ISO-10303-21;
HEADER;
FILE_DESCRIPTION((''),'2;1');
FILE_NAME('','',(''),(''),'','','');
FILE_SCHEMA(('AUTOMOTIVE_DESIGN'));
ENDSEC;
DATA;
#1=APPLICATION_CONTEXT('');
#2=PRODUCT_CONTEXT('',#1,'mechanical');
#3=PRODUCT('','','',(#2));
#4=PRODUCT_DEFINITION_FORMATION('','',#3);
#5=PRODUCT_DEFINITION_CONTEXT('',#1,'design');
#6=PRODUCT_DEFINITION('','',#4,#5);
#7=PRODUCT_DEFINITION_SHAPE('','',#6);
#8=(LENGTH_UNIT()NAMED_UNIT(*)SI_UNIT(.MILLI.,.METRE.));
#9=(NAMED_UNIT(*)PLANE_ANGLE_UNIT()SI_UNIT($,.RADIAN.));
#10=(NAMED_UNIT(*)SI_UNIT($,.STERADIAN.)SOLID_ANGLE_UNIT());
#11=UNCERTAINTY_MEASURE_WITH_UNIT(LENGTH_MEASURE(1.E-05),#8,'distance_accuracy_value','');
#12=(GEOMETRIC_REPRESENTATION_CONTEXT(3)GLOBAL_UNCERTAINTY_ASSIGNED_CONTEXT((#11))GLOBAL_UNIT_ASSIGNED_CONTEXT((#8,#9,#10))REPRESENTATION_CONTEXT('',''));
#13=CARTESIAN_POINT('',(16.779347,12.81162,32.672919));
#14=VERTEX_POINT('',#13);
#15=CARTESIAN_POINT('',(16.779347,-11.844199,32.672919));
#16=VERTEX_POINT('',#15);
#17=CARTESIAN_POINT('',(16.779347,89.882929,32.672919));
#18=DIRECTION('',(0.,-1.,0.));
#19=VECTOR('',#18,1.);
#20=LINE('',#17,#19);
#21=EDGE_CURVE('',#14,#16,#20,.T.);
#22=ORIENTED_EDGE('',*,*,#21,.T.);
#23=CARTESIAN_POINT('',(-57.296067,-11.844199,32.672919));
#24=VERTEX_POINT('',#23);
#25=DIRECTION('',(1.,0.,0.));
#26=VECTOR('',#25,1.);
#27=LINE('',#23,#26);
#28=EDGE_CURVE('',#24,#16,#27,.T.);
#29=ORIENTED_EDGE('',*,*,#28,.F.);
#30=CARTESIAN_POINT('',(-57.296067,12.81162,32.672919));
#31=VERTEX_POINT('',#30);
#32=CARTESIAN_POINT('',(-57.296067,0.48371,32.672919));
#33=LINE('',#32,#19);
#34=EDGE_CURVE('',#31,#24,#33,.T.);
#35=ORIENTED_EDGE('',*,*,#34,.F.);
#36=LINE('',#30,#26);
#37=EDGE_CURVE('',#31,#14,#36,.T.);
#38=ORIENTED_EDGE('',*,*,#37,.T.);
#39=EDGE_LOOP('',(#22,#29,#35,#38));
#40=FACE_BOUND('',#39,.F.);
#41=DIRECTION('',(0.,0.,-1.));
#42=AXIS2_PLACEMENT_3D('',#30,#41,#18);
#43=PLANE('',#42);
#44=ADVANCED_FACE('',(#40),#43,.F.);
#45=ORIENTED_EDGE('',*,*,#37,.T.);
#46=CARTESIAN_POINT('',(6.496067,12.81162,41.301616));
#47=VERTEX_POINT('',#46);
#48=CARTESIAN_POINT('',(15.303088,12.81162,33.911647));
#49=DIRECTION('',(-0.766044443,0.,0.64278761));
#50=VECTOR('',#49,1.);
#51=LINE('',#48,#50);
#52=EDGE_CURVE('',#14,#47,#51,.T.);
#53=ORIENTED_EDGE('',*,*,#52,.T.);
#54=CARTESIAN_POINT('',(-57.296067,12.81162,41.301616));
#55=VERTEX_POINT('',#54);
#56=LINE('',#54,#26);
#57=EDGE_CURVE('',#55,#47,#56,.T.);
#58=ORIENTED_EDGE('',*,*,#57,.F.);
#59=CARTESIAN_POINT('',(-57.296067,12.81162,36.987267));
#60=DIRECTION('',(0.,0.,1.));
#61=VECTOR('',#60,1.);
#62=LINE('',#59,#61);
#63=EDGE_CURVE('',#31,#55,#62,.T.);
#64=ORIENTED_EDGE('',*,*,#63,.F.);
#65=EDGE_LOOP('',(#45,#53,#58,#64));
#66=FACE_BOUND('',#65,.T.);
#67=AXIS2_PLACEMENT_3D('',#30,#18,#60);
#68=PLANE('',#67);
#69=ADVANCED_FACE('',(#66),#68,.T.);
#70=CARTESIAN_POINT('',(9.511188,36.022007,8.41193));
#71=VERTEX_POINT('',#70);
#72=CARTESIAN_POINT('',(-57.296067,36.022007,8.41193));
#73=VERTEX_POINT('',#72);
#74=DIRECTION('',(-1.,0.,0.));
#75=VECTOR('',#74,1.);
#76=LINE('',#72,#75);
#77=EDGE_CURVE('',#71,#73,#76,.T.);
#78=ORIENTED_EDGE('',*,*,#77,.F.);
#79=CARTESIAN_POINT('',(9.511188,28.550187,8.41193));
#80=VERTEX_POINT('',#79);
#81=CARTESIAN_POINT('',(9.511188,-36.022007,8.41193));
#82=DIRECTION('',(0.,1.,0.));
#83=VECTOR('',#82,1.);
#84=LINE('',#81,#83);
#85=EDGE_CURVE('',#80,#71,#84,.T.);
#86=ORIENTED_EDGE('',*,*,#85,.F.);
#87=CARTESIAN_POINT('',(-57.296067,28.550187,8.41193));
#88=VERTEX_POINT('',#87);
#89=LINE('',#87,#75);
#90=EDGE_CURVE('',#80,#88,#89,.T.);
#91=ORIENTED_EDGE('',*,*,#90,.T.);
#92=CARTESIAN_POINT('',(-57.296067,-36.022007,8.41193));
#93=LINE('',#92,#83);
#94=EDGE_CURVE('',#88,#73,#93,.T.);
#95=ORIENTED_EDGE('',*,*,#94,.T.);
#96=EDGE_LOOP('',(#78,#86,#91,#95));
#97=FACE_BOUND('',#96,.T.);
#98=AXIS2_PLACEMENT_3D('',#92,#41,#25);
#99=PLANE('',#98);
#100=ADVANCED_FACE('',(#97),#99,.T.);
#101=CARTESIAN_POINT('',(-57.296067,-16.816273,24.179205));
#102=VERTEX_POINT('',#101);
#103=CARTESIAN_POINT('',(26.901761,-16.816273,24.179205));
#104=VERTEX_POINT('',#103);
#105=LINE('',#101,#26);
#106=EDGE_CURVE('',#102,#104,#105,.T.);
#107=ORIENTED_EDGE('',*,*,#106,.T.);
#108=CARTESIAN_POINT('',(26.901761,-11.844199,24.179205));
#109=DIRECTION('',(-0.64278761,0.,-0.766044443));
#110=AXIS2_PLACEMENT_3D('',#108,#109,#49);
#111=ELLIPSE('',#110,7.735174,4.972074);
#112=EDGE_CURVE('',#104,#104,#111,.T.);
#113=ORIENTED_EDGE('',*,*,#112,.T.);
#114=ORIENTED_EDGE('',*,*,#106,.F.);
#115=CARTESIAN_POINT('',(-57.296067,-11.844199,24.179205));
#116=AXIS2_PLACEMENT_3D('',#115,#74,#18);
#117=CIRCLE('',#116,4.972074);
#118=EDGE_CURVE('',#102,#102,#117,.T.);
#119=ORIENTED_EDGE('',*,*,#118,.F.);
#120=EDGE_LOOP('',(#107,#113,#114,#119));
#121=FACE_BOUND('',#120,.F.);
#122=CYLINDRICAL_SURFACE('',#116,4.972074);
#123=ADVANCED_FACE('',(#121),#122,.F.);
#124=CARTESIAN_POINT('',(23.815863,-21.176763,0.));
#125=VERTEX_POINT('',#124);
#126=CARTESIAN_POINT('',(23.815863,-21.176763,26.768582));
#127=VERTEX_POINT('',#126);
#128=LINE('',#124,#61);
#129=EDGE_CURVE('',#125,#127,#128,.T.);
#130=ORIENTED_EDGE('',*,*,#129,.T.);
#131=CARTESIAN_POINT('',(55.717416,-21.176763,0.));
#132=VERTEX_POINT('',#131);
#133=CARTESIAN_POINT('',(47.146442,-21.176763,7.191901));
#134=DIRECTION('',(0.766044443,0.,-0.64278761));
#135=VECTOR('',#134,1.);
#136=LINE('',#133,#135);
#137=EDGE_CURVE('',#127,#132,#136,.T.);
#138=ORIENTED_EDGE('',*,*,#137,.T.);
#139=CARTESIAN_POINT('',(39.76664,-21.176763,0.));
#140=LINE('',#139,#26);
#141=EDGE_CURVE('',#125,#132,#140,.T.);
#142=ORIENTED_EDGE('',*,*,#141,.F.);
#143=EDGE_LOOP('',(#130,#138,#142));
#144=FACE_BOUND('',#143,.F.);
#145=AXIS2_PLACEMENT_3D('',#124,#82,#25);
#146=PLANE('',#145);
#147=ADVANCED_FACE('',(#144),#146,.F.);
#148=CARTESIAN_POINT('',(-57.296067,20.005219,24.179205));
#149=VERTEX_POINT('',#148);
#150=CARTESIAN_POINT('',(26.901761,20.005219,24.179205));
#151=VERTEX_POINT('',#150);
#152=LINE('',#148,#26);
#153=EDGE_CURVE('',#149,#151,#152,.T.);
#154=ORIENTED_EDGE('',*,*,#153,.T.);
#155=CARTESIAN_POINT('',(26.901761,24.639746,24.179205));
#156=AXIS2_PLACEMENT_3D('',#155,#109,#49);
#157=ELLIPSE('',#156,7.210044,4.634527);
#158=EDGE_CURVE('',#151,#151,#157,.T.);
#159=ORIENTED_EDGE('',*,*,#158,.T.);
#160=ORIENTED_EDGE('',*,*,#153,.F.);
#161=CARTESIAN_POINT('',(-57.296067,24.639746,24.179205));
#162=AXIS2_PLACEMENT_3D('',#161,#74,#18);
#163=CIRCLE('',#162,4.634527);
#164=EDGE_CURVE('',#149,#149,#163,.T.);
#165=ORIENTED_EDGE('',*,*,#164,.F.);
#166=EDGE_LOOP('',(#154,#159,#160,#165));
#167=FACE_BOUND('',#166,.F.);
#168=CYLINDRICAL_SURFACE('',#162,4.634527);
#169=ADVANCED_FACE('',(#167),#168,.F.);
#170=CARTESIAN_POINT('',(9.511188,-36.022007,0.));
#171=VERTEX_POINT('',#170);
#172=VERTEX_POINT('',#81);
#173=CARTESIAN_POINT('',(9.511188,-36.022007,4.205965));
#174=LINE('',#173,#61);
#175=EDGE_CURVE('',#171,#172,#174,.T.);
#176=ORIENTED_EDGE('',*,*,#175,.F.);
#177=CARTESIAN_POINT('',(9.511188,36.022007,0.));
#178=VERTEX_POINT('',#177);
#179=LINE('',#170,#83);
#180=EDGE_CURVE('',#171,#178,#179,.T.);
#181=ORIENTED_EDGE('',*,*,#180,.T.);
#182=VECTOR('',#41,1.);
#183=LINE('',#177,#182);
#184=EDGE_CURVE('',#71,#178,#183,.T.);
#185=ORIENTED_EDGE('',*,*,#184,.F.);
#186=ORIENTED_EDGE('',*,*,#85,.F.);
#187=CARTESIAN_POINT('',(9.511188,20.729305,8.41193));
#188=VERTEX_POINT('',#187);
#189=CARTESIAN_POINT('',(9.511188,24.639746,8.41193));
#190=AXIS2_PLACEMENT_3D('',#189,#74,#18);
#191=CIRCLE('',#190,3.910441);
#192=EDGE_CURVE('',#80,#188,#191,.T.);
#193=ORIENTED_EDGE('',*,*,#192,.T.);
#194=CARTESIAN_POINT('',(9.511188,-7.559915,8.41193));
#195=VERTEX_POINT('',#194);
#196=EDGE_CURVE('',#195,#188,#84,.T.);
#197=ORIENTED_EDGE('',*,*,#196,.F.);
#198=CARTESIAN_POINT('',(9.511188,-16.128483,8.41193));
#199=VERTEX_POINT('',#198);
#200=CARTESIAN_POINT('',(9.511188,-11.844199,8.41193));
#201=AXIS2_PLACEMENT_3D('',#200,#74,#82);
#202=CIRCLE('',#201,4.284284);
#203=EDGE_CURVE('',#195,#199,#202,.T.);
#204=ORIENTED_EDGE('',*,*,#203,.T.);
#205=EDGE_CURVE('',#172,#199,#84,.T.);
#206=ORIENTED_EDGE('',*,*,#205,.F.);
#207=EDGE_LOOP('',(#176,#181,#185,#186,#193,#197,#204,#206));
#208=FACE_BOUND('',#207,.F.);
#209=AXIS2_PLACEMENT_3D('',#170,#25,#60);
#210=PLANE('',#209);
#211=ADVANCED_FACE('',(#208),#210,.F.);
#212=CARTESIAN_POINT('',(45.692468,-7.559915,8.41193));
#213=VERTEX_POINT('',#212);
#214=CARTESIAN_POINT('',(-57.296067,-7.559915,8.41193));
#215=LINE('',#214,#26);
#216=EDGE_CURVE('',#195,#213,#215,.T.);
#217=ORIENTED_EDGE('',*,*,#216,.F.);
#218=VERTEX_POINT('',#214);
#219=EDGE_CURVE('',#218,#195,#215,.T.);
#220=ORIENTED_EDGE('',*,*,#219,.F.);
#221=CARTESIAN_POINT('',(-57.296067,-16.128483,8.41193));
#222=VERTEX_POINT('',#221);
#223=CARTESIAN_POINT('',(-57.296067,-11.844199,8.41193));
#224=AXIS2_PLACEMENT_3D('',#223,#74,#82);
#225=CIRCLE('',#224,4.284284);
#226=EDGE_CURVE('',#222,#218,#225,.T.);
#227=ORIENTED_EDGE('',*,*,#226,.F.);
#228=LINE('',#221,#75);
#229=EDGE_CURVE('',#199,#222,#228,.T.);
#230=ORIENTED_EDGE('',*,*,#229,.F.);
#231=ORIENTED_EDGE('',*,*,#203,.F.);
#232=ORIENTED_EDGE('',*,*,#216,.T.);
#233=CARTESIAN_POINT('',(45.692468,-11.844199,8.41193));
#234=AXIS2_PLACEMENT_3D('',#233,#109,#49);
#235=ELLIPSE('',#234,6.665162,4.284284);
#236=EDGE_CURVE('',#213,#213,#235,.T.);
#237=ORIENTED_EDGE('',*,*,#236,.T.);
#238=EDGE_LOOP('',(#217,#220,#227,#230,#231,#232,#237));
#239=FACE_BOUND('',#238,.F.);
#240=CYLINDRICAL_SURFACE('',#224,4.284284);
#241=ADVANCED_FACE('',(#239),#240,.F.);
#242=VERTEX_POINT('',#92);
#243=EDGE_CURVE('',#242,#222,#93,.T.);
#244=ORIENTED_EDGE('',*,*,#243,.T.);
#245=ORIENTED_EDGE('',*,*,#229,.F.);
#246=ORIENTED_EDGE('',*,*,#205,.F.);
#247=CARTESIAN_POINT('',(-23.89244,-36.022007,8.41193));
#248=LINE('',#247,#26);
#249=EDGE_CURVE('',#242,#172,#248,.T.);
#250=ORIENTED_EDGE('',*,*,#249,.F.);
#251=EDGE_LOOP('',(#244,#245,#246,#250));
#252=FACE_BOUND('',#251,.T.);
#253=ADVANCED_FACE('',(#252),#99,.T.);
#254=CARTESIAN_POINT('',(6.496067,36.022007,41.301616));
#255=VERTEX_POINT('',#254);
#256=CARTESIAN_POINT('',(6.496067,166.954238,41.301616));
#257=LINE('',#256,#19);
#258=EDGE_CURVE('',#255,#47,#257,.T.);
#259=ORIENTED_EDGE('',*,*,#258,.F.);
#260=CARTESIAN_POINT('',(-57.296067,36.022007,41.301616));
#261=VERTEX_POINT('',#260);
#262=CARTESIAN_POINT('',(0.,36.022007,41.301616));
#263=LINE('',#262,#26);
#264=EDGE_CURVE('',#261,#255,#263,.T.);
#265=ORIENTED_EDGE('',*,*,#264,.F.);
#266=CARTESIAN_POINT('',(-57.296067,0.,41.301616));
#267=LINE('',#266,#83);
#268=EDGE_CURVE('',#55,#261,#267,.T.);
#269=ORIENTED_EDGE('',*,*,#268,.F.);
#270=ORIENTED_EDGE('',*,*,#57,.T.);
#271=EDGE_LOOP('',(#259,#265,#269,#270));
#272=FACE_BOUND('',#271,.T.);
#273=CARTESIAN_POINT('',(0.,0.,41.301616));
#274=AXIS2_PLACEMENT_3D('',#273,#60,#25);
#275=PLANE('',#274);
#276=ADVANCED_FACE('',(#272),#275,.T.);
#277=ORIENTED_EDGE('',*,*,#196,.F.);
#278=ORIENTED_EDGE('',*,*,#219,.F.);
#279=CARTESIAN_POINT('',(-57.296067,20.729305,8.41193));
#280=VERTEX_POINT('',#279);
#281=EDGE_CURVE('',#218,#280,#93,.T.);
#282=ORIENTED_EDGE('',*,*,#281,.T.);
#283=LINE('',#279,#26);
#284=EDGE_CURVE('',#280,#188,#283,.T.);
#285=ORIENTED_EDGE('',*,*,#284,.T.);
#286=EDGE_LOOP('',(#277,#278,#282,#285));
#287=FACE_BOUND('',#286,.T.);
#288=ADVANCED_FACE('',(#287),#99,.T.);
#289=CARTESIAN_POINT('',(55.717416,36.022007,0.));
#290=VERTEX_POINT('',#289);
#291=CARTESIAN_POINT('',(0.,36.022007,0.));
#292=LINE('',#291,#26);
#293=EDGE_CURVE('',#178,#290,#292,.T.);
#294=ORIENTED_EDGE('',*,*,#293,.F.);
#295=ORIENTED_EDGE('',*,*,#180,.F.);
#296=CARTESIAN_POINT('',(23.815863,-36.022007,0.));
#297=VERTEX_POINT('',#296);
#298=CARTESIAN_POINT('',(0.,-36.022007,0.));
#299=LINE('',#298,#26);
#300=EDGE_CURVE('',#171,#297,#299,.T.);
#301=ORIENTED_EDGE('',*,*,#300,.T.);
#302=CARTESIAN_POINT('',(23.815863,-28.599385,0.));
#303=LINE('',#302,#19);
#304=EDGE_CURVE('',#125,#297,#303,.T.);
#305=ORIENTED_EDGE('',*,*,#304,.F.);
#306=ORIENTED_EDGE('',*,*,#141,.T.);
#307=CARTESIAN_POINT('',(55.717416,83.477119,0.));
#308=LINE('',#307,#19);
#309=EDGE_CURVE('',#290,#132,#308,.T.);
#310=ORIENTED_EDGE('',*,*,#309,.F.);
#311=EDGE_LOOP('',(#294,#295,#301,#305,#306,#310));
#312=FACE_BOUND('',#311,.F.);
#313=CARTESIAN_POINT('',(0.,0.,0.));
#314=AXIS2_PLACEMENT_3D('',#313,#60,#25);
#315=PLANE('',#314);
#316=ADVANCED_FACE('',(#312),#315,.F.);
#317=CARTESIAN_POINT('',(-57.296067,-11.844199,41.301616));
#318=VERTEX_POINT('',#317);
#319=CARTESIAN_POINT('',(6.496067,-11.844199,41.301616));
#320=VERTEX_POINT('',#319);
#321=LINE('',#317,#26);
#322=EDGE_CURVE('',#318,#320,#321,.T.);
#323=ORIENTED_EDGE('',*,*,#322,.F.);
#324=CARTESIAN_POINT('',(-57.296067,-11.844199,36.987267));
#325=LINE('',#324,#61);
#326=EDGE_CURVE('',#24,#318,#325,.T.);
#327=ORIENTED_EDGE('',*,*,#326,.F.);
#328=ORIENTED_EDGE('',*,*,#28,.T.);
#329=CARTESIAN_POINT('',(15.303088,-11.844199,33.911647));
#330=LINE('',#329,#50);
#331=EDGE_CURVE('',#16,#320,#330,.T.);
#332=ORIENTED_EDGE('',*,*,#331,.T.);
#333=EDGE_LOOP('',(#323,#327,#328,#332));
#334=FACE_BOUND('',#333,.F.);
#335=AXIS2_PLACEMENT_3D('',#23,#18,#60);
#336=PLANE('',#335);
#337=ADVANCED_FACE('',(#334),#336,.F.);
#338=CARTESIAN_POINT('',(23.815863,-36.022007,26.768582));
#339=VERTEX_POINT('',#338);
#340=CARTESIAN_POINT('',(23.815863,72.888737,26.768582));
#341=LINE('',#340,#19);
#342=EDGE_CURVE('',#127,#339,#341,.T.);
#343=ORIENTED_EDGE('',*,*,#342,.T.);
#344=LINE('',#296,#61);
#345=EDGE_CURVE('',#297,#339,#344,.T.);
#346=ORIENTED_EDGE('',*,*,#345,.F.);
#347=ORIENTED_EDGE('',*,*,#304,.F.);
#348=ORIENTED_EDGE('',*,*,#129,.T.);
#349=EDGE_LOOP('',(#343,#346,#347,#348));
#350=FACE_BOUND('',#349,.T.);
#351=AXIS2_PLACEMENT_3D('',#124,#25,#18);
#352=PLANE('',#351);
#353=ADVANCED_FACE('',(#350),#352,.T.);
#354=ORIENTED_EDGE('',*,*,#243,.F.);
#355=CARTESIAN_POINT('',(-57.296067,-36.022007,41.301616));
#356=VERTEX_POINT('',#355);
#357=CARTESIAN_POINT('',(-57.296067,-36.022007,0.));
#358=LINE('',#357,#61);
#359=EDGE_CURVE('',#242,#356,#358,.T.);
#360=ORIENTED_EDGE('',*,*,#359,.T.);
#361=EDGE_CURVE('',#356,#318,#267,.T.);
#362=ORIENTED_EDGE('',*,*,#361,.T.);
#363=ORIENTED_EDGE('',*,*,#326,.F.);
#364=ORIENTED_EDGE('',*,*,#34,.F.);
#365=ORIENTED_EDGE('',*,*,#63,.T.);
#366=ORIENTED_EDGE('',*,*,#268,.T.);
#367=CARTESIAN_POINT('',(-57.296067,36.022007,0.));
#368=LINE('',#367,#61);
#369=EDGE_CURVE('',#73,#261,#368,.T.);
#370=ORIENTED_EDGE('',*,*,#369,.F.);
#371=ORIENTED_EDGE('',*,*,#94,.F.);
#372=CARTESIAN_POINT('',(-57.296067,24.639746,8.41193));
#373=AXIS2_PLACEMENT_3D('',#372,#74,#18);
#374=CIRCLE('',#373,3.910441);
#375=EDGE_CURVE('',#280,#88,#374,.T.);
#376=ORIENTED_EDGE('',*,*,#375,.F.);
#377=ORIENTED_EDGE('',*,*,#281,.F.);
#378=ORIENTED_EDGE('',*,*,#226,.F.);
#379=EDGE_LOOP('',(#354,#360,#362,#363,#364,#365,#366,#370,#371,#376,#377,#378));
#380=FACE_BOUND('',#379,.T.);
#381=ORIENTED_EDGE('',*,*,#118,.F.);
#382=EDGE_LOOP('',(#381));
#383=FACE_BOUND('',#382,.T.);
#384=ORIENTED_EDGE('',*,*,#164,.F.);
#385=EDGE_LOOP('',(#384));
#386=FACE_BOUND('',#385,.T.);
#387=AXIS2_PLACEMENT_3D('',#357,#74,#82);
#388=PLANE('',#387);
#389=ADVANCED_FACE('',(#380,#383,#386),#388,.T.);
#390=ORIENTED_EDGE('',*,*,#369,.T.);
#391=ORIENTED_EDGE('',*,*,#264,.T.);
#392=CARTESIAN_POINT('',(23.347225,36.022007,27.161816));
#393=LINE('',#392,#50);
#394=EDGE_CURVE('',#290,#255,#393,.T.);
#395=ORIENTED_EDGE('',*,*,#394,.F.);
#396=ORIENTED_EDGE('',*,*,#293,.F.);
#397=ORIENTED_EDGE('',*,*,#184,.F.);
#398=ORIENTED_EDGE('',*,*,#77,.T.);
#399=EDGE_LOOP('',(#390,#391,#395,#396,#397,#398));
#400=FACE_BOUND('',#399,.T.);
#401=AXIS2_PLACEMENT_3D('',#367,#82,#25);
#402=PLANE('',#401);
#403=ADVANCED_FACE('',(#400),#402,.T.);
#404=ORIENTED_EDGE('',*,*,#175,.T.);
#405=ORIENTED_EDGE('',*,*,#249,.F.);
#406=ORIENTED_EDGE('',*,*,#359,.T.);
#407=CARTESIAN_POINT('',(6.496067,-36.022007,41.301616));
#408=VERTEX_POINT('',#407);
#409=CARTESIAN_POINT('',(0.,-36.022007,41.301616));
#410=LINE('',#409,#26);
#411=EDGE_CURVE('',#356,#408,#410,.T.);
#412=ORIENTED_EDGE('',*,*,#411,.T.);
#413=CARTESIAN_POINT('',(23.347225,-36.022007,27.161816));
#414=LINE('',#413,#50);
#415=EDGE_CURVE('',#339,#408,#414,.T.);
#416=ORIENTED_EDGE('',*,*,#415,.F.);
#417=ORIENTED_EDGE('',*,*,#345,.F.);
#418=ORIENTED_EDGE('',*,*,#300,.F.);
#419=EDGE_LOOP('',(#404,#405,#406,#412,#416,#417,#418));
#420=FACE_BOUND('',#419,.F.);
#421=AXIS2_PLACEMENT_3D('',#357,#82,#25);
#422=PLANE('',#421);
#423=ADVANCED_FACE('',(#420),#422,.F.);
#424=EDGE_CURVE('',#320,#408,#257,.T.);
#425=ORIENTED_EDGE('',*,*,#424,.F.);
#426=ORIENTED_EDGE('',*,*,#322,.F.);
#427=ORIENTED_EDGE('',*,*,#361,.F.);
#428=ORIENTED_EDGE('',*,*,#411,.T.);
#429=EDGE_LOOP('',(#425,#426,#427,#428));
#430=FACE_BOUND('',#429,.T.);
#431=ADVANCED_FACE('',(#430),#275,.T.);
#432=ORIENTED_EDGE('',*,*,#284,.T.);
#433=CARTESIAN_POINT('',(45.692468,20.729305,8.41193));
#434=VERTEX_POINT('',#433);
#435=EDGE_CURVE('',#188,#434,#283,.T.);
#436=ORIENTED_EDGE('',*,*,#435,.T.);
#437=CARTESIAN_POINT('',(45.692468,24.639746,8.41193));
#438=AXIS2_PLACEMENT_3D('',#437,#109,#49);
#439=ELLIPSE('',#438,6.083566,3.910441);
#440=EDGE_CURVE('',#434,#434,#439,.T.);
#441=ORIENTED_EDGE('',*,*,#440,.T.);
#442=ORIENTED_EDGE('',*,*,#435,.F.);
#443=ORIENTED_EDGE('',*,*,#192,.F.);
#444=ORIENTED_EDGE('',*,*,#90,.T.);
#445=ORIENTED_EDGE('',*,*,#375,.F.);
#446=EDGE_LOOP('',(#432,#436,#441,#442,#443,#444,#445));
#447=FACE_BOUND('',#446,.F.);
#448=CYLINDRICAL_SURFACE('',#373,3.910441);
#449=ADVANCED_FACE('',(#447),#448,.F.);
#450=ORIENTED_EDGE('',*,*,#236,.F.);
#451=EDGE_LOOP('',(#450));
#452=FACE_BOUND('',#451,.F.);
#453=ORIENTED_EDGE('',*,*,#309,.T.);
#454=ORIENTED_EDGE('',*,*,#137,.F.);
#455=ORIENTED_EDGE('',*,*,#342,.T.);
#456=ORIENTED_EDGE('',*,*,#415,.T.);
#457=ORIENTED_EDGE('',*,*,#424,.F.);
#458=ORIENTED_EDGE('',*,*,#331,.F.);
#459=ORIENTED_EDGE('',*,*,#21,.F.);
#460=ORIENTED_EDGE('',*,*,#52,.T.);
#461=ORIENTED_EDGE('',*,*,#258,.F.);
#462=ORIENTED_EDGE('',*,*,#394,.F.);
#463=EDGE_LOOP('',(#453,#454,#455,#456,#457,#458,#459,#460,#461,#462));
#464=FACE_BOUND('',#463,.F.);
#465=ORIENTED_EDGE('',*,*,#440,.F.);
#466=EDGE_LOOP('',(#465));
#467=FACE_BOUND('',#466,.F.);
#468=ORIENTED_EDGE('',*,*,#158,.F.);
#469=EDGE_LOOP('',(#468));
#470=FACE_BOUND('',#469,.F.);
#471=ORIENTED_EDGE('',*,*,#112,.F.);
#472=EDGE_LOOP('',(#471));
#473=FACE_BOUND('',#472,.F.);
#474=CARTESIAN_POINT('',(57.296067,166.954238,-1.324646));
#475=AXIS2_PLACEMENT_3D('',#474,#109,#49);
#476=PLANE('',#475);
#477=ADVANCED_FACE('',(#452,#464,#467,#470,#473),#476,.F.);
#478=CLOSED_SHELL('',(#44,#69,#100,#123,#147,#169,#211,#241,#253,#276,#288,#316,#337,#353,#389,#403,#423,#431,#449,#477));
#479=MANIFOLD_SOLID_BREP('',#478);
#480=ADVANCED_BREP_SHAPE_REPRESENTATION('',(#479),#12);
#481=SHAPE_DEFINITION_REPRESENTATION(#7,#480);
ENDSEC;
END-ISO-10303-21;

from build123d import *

# Parameters (mm, degrees)
F0_W        = 114.5921349525
F0_H        = 72.0440149307
F1_DEPTH    = 41.3016155362
F2_W        = 66.8072551489
F2_H        = 8.4119299427
F6_DEPTH    = 72.0450149307
F7_T1_DEPTH = 333.9084750306
F3_W        = 31.901553337
F3_H        = 14.8452445865
F4_DEPTH    = 41.3026155362
F5_W        = 24.6558189392
F5_H        = 8.6286962032
F8_DEPTH    = 113.0144836478
F9_R        = 4.6345272192
F9_R_2      = 4.97207371
F10_DEPTH   = 113.0144836478


# Not quite as in the source:
# - a fillet or chamfer that OpenCascade refuses, or shapes differently, is made with other operations: its cross-section is extruded or revolved along the edge and cut away or added


with BuildPart() as f1:
    # F0 (on Top) → F1 (new body)
    with BuildSketch(Plane.XY):
        Rectangle(F0_W, F0_H)
    extrude(amount=F1_DEPTH)

    # F2 (on face) → F6 (cut, through all)
    with BuildSketch(Plane.XZ.offset(36.0220074654)):
        with Locations((-23.8924399018, 4.2059649713)):
            Rectangle(F2_W, F2_H)
    extrude(amount=-F6_DEPTH, mode=Mode.SUBTRACT)

    # F7: chamfer of 50.8 x 42.6262612638 on 1 edges, made by hand

    # F7_s2 → F7_t1 (cut)
    with BuildSketch(Plane.XZ.offset(-166.9542375153)):
        Polygon((57.2960674763, -1.3246457276), (6.4960674763, 41.3016155362), (57.2960674763, 41.3016155362), align=None)
    extrude(amount=F7_T1_DEPTH, mode=Mode.SUBTRACT)

    # F3 (on face) → F4 (cut, through all)
    with BuildSketch(Plane(origin=(0, 0, 0), x_dir=(1, 0, 0), z_dir=(0, 0, -1))):
        with Locations((39.766639503, 28.5993851721)):
            Rectangle(F3_W, F3_H)
    extrude(amount=-F4_DEPTH, mode=Mode.SUBTRACT)

    # F5 (on face) → F8 (cut, through all)
    with BuildSketch(Plane(origin=(-57.2960674763, 0, 0), x_dir=(0, -1, 0), z_dir=(-1, 0, 0))):
        with Locations((-0.4837103188, 36.9872674346)):
            Rectangle(F5_W, F5_H)
    extrude(amount=-F8_DEPTH, mode=Mode.SUBTRACT)

    # F9 (on face) → F10 (cut, through all)
    with BuildSketch(Plane(origin=(-57.2960674763, 0, 0), x_dir=(0, -1, 0), z_dir=(-1, 0, 0))):
        with Locations((-24.6397461742, 24.1792052984)):
            Circle(F9_R)
        with Locations((11.8441991508, 24.1792052984)):
            Circle(F9_R_2)
        with BuildLine():
            ThreePointArc((16.128482923, 8.4119299427), (11.8441991508, 12.6962137149), (7.5599153786, 8.4119299427))
            Line((7.5599153786, 8.4119299427), (16.128482923, 8.4119299427))
        make_face()
        with BuildLine():
            ThreePointArc((-28.5501872317, 8.4119299427), (-24.6397461742, 4.5014888852), (-20.7293051168, 8.4119299427))
            Line((-20.7293051168, 8.4119299427), (-28.5501872317, 8.4119299427))
        make_face()
        with BuildLine():
            Line((-28.5501872317, 8.4119299427), (-20.7293051168, 8.4119299427))
            ThreePointArc((-20.7293051168, 8.4119299427), (-24.6397461742, 12.3223710001), (-28.5501872317, 8.4119299427))
        make_face()
        with BuildLine():
            Line((16.128482923, 8.4119299427), (7.5599153786, 8.4119299427))
            ThreePointArc((7.5599153786, 8.4119299427), (11.8441991508, 4.1276461705), (16.128482923, 8.4119299427))
        make_face()
    extrude(amount=-F10_DEPTH, mode=Mode.SUBTRACT)


solid = f1.part
